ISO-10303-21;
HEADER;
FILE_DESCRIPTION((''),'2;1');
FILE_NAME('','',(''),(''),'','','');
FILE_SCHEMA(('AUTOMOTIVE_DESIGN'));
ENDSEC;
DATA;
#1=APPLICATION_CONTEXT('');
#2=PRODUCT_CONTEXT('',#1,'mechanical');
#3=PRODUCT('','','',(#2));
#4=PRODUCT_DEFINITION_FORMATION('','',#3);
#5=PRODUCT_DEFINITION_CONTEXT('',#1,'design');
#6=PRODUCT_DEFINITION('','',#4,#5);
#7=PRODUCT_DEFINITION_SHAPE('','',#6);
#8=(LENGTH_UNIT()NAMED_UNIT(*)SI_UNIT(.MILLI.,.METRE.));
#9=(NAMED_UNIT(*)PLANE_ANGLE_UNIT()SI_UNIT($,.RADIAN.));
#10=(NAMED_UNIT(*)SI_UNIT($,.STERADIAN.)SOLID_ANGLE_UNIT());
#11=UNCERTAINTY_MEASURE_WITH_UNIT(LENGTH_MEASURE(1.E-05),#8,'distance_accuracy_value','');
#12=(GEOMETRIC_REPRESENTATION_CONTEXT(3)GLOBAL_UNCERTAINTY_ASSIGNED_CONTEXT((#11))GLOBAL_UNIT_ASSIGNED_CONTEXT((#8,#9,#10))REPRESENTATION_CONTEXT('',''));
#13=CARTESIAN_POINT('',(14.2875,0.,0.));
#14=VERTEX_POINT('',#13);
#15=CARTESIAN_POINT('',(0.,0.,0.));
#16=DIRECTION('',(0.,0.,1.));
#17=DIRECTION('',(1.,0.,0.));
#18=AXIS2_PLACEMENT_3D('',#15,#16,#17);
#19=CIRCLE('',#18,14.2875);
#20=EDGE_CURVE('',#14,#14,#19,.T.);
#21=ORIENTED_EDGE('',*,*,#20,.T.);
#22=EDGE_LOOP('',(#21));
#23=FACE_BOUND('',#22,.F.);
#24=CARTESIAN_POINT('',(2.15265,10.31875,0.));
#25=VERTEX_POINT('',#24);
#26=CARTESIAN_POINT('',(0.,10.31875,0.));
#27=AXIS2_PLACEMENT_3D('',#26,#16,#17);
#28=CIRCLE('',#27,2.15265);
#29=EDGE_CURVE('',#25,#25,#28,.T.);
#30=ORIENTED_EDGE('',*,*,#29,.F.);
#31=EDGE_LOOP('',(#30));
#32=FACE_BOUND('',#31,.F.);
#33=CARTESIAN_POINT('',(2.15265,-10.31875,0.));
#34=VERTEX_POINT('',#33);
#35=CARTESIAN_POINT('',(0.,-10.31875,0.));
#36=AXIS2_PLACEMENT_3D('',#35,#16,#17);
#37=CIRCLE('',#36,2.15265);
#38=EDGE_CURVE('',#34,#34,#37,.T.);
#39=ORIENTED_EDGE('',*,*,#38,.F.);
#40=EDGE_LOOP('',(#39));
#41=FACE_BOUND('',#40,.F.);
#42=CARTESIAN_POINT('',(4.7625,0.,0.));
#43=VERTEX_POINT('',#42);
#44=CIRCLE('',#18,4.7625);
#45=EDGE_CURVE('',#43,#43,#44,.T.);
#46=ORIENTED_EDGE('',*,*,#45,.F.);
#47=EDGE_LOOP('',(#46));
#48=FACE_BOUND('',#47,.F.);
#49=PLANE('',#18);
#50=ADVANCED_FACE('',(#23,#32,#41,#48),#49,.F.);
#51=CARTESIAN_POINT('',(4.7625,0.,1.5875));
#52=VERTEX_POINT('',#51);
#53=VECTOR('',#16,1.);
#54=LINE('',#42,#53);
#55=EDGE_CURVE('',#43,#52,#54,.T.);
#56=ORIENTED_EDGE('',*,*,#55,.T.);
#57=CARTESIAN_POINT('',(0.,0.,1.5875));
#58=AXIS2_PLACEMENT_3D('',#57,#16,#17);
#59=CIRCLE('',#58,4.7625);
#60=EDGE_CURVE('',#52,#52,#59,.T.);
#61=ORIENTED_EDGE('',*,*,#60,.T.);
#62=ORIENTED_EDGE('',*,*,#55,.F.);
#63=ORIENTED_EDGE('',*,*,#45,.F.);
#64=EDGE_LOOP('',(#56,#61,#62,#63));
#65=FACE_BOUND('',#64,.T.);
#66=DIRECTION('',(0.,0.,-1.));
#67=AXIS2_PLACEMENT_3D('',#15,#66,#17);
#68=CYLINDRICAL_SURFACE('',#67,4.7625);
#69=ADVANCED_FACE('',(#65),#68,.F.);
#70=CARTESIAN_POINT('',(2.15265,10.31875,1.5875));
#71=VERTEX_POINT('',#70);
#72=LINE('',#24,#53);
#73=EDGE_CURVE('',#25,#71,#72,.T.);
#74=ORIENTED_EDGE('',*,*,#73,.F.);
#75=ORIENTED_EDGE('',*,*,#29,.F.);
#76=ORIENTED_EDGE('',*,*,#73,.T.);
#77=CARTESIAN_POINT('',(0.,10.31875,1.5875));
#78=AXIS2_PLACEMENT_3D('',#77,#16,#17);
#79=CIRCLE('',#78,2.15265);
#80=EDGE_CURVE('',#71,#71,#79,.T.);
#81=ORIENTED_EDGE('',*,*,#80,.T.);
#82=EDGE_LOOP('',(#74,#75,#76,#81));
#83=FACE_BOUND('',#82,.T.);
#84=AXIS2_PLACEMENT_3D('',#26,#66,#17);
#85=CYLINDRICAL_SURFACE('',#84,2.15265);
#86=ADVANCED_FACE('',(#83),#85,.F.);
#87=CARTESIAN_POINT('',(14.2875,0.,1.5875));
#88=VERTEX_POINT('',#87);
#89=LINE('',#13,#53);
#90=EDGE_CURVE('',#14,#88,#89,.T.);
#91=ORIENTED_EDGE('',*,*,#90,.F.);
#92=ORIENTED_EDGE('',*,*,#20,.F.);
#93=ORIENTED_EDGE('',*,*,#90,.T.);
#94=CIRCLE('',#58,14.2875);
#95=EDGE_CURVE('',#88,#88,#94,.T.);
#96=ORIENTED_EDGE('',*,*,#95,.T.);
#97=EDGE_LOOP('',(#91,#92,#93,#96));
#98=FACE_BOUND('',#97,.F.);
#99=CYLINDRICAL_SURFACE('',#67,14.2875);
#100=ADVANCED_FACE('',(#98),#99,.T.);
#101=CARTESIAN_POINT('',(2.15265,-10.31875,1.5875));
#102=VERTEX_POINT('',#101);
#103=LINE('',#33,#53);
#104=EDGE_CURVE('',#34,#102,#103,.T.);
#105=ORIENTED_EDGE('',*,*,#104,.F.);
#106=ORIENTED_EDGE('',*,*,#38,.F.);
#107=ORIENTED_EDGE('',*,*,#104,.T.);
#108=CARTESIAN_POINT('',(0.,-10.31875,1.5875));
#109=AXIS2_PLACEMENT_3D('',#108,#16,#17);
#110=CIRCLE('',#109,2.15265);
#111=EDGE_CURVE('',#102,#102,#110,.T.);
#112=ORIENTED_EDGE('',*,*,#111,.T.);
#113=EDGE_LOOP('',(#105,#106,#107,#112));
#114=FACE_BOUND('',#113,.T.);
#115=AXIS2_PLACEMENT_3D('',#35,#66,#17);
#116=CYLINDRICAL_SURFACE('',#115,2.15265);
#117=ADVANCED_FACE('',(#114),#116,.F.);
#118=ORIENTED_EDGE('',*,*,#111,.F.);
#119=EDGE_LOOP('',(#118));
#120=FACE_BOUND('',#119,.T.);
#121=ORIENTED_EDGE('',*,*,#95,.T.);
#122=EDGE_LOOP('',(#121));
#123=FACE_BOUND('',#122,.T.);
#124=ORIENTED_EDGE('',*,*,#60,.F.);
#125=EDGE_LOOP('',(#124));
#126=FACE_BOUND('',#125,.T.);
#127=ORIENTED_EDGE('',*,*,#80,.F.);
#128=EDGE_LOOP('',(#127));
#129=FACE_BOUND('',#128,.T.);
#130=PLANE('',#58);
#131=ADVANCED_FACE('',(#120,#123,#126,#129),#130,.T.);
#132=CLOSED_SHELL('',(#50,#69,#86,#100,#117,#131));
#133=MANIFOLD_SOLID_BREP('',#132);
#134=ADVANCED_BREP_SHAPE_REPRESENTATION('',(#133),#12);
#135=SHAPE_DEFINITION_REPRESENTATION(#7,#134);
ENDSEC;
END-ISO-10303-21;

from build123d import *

# Parameters (mm, degrees)
F0_R     = 14.2875
F0_R_2   = 2.15265
F0_R_3   = 4.7625
F1_DEPTH = 1.5875


# Not quite as in the source:
# - a feature names something its author has since deleted; it is built from what else it names


with BuildPart() as f1:
    # F0 (on Top) → F1 (new body)
    with BuildSketch(Plane.XY):
        Circle(F0_R)
        with Locations((0, -10.31875)):
            Circle(F0_R_2, mode=Mode.SUBTRACT)
        Circle(F0_R_3, mode=Mode.SUBTRACT)
        with Locations((0, 10.31875)):
            Circle(F0_R_2, mode=Mode.SUBTRACT)
    extrude(amount=F1_DEPTH)


solid = f1.part
